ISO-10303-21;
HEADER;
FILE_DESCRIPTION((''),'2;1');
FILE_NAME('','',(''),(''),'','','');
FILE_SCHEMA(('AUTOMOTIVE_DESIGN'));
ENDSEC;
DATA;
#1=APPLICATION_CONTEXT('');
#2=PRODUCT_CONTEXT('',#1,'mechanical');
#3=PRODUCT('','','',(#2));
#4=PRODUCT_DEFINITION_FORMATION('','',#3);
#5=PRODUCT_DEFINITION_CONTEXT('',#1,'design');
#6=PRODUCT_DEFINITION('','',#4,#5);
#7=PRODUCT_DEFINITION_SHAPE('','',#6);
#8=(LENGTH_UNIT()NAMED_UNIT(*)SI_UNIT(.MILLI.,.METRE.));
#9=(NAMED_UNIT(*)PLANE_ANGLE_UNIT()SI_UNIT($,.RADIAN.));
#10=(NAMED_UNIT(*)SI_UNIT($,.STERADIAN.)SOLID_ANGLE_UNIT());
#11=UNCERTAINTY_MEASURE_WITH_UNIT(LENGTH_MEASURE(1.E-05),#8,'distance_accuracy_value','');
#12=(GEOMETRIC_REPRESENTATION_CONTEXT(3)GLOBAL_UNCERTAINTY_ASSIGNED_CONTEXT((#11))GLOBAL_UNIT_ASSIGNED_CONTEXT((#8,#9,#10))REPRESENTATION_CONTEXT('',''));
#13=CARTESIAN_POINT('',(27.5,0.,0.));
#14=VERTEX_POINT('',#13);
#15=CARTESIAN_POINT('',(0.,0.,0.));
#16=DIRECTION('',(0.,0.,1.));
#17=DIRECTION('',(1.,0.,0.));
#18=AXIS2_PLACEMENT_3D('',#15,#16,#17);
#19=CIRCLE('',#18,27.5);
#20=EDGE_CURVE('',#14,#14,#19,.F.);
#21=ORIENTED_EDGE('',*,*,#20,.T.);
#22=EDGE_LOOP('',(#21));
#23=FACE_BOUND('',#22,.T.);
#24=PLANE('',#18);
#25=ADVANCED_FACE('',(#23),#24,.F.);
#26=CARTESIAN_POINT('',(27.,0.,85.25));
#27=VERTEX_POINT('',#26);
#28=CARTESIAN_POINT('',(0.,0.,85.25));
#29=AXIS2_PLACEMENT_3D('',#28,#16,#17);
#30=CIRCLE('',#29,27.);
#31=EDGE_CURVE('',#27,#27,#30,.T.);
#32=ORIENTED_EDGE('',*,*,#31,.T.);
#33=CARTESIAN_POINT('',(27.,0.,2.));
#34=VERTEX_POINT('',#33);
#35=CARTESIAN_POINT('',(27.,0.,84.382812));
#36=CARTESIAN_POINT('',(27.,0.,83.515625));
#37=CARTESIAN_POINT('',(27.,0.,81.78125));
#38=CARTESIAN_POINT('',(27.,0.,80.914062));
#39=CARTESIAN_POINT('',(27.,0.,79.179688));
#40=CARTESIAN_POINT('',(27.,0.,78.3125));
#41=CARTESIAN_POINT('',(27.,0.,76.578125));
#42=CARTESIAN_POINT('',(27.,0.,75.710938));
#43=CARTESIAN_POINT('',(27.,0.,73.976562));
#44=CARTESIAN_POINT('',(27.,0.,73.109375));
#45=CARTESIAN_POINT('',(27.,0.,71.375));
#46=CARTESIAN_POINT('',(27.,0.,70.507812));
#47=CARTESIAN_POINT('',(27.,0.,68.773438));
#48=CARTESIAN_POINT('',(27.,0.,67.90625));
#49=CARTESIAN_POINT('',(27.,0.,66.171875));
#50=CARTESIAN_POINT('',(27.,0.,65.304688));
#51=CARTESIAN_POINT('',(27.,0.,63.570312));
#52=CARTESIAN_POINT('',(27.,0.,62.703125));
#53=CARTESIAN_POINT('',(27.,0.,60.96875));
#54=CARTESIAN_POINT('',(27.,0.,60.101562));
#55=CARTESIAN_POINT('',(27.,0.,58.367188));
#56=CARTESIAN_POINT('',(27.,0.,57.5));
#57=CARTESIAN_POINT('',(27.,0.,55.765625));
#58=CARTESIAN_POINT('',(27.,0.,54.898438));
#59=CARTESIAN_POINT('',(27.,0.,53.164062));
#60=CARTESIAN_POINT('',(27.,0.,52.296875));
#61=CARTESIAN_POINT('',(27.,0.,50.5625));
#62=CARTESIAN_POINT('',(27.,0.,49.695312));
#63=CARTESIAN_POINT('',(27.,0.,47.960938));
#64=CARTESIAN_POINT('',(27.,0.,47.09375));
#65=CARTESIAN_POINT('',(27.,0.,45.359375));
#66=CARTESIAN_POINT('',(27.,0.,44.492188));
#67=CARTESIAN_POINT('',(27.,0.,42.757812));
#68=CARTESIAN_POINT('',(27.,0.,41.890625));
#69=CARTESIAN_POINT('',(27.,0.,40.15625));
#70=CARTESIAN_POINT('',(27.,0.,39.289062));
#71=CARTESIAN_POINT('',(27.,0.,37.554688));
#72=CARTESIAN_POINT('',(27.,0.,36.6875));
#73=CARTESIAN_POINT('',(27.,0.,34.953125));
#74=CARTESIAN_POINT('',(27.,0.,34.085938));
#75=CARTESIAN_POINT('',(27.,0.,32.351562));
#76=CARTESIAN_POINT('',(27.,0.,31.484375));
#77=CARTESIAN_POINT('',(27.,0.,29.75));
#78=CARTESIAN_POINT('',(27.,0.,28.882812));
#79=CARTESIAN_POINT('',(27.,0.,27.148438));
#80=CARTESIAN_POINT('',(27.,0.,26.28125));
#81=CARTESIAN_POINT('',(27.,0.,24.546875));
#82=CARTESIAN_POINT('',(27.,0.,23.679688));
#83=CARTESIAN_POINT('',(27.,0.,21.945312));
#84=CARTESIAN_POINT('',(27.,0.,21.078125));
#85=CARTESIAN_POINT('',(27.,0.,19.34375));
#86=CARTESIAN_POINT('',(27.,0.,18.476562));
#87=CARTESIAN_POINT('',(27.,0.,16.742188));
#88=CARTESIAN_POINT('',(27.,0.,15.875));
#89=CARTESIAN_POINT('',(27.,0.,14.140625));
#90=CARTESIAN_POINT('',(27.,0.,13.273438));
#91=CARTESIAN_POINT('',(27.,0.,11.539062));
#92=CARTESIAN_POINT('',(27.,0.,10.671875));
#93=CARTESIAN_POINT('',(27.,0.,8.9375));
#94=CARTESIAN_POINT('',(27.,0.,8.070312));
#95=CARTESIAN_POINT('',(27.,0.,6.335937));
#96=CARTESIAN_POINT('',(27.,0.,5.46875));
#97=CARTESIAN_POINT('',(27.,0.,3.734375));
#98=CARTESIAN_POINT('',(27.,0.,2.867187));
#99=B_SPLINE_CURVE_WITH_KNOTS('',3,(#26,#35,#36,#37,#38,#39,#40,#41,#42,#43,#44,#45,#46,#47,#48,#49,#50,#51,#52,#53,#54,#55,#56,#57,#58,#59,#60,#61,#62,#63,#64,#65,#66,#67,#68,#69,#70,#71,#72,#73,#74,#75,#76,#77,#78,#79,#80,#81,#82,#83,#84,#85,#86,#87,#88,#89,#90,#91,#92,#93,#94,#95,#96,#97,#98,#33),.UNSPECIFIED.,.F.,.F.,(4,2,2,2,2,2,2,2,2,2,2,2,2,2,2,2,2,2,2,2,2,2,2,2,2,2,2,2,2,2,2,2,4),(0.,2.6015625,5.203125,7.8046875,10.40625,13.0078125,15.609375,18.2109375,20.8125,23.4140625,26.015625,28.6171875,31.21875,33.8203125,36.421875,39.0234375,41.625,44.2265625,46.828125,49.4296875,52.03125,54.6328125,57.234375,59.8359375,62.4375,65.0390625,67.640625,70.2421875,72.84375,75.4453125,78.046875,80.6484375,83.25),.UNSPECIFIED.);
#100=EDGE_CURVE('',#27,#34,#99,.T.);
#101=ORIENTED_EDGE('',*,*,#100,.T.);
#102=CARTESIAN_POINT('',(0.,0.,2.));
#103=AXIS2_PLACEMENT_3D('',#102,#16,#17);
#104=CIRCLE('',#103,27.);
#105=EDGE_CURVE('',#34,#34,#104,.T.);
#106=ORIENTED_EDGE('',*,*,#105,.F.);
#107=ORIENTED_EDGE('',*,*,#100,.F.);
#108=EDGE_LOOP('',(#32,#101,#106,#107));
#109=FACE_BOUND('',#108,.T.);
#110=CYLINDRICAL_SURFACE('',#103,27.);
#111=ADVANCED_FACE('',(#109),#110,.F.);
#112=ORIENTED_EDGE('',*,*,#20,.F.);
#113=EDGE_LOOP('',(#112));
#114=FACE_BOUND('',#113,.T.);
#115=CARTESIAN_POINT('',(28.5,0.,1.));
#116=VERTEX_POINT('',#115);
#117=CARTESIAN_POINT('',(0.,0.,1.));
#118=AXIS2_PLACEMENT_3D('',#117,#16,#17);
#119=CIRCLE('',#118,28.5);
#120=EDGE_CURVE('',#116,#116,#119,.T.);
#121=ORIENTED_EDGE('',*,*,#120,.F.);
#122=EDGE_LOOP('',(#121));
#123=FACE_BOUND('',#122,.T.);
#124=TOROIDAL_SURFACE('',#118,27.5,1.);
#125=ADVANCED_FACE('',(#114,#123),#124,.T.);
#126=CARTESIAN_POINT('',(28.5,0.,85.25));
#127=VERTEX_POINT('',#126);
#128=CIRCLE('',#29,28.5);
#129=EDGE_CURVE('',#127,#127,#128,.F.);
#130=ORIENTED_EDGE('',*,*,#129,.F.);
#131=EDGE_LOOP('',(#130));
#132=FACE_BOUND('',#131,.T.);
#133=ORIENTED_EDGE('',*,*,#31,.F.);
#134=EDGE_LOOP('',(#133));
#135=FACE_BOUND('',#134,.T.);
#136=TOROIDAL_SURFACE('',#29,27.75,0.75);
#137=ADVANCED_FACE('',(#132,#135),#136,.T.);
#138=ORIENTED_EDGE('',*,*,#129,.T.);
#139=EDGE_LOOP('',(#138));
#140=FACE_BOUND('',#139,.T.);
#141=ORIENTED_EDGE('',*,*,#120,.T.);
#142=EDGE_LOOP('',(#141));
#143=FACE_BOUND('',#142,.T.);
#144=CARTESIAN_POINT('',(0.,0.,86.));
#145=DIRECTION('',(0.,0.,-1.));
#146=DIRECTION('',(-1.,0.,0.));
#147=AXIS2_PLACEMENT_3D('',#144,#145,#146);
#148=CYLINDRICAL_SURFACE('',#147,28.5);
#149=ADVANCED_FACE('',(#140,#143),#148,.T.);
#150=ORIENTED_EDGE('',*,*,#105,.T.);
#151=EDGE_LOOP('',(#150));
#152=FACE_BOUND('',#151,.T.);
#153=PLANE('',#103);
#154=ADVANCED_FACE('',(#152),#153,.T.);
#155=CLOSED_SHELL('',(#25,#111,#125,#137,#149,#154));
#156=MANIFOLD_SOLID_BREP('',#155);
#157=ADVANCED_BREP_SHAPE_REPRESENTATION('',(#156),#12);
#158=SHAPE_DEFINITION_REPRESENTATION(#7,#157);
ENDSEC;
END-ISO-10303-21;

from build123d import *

# Parameters (mm, degrees)
SKETCH1_R           = 28.5
BOSS_EXTRUDE1_DEPTH = 86
SKETCH2_R           = 27
CUT_EXTRUDE1_DEPTH  = 84
FILLET1_R           = 1
FILLET2_R           = 0.75


with BuildPart() as part:
    # Sketch1 → Boss-Extrude1 (new body)
    with BuildSketch(Plane.XY):
        Circle(SKETCH1_R)
    extrude(amount=BOSS_EXTRUDE1_DEPTH)

    # Sketch2 → Cut-Extrude1 (cut)
    with BuildSketch(Plane.XY.offset(86)):
        Circle(SKETCH2_R)
    extrude(amount=-CUT_EXTRUDE1_DEPTH, mode=Mode.SUBTRACT)

    # Fillet1
    fillet1_edges = [part.edges().sort_by_distance(p)[0] for p in [
        (-28.5, 0, 0),
    ]]
    fillet(fillet1_edges, radius=FILLET1_R)

    # Fillet2
    fillet2_edges = [part.edges().sort_by_distance(p)[0] for p in [
        (-28.5, 0, 86),
        (-27, 0, 86),
    ]]
    fillet(fillet2_edges, radius=FILLET2_R - 0.0001)  # a hair under: the kernel refuses the full size


solid = part.part
